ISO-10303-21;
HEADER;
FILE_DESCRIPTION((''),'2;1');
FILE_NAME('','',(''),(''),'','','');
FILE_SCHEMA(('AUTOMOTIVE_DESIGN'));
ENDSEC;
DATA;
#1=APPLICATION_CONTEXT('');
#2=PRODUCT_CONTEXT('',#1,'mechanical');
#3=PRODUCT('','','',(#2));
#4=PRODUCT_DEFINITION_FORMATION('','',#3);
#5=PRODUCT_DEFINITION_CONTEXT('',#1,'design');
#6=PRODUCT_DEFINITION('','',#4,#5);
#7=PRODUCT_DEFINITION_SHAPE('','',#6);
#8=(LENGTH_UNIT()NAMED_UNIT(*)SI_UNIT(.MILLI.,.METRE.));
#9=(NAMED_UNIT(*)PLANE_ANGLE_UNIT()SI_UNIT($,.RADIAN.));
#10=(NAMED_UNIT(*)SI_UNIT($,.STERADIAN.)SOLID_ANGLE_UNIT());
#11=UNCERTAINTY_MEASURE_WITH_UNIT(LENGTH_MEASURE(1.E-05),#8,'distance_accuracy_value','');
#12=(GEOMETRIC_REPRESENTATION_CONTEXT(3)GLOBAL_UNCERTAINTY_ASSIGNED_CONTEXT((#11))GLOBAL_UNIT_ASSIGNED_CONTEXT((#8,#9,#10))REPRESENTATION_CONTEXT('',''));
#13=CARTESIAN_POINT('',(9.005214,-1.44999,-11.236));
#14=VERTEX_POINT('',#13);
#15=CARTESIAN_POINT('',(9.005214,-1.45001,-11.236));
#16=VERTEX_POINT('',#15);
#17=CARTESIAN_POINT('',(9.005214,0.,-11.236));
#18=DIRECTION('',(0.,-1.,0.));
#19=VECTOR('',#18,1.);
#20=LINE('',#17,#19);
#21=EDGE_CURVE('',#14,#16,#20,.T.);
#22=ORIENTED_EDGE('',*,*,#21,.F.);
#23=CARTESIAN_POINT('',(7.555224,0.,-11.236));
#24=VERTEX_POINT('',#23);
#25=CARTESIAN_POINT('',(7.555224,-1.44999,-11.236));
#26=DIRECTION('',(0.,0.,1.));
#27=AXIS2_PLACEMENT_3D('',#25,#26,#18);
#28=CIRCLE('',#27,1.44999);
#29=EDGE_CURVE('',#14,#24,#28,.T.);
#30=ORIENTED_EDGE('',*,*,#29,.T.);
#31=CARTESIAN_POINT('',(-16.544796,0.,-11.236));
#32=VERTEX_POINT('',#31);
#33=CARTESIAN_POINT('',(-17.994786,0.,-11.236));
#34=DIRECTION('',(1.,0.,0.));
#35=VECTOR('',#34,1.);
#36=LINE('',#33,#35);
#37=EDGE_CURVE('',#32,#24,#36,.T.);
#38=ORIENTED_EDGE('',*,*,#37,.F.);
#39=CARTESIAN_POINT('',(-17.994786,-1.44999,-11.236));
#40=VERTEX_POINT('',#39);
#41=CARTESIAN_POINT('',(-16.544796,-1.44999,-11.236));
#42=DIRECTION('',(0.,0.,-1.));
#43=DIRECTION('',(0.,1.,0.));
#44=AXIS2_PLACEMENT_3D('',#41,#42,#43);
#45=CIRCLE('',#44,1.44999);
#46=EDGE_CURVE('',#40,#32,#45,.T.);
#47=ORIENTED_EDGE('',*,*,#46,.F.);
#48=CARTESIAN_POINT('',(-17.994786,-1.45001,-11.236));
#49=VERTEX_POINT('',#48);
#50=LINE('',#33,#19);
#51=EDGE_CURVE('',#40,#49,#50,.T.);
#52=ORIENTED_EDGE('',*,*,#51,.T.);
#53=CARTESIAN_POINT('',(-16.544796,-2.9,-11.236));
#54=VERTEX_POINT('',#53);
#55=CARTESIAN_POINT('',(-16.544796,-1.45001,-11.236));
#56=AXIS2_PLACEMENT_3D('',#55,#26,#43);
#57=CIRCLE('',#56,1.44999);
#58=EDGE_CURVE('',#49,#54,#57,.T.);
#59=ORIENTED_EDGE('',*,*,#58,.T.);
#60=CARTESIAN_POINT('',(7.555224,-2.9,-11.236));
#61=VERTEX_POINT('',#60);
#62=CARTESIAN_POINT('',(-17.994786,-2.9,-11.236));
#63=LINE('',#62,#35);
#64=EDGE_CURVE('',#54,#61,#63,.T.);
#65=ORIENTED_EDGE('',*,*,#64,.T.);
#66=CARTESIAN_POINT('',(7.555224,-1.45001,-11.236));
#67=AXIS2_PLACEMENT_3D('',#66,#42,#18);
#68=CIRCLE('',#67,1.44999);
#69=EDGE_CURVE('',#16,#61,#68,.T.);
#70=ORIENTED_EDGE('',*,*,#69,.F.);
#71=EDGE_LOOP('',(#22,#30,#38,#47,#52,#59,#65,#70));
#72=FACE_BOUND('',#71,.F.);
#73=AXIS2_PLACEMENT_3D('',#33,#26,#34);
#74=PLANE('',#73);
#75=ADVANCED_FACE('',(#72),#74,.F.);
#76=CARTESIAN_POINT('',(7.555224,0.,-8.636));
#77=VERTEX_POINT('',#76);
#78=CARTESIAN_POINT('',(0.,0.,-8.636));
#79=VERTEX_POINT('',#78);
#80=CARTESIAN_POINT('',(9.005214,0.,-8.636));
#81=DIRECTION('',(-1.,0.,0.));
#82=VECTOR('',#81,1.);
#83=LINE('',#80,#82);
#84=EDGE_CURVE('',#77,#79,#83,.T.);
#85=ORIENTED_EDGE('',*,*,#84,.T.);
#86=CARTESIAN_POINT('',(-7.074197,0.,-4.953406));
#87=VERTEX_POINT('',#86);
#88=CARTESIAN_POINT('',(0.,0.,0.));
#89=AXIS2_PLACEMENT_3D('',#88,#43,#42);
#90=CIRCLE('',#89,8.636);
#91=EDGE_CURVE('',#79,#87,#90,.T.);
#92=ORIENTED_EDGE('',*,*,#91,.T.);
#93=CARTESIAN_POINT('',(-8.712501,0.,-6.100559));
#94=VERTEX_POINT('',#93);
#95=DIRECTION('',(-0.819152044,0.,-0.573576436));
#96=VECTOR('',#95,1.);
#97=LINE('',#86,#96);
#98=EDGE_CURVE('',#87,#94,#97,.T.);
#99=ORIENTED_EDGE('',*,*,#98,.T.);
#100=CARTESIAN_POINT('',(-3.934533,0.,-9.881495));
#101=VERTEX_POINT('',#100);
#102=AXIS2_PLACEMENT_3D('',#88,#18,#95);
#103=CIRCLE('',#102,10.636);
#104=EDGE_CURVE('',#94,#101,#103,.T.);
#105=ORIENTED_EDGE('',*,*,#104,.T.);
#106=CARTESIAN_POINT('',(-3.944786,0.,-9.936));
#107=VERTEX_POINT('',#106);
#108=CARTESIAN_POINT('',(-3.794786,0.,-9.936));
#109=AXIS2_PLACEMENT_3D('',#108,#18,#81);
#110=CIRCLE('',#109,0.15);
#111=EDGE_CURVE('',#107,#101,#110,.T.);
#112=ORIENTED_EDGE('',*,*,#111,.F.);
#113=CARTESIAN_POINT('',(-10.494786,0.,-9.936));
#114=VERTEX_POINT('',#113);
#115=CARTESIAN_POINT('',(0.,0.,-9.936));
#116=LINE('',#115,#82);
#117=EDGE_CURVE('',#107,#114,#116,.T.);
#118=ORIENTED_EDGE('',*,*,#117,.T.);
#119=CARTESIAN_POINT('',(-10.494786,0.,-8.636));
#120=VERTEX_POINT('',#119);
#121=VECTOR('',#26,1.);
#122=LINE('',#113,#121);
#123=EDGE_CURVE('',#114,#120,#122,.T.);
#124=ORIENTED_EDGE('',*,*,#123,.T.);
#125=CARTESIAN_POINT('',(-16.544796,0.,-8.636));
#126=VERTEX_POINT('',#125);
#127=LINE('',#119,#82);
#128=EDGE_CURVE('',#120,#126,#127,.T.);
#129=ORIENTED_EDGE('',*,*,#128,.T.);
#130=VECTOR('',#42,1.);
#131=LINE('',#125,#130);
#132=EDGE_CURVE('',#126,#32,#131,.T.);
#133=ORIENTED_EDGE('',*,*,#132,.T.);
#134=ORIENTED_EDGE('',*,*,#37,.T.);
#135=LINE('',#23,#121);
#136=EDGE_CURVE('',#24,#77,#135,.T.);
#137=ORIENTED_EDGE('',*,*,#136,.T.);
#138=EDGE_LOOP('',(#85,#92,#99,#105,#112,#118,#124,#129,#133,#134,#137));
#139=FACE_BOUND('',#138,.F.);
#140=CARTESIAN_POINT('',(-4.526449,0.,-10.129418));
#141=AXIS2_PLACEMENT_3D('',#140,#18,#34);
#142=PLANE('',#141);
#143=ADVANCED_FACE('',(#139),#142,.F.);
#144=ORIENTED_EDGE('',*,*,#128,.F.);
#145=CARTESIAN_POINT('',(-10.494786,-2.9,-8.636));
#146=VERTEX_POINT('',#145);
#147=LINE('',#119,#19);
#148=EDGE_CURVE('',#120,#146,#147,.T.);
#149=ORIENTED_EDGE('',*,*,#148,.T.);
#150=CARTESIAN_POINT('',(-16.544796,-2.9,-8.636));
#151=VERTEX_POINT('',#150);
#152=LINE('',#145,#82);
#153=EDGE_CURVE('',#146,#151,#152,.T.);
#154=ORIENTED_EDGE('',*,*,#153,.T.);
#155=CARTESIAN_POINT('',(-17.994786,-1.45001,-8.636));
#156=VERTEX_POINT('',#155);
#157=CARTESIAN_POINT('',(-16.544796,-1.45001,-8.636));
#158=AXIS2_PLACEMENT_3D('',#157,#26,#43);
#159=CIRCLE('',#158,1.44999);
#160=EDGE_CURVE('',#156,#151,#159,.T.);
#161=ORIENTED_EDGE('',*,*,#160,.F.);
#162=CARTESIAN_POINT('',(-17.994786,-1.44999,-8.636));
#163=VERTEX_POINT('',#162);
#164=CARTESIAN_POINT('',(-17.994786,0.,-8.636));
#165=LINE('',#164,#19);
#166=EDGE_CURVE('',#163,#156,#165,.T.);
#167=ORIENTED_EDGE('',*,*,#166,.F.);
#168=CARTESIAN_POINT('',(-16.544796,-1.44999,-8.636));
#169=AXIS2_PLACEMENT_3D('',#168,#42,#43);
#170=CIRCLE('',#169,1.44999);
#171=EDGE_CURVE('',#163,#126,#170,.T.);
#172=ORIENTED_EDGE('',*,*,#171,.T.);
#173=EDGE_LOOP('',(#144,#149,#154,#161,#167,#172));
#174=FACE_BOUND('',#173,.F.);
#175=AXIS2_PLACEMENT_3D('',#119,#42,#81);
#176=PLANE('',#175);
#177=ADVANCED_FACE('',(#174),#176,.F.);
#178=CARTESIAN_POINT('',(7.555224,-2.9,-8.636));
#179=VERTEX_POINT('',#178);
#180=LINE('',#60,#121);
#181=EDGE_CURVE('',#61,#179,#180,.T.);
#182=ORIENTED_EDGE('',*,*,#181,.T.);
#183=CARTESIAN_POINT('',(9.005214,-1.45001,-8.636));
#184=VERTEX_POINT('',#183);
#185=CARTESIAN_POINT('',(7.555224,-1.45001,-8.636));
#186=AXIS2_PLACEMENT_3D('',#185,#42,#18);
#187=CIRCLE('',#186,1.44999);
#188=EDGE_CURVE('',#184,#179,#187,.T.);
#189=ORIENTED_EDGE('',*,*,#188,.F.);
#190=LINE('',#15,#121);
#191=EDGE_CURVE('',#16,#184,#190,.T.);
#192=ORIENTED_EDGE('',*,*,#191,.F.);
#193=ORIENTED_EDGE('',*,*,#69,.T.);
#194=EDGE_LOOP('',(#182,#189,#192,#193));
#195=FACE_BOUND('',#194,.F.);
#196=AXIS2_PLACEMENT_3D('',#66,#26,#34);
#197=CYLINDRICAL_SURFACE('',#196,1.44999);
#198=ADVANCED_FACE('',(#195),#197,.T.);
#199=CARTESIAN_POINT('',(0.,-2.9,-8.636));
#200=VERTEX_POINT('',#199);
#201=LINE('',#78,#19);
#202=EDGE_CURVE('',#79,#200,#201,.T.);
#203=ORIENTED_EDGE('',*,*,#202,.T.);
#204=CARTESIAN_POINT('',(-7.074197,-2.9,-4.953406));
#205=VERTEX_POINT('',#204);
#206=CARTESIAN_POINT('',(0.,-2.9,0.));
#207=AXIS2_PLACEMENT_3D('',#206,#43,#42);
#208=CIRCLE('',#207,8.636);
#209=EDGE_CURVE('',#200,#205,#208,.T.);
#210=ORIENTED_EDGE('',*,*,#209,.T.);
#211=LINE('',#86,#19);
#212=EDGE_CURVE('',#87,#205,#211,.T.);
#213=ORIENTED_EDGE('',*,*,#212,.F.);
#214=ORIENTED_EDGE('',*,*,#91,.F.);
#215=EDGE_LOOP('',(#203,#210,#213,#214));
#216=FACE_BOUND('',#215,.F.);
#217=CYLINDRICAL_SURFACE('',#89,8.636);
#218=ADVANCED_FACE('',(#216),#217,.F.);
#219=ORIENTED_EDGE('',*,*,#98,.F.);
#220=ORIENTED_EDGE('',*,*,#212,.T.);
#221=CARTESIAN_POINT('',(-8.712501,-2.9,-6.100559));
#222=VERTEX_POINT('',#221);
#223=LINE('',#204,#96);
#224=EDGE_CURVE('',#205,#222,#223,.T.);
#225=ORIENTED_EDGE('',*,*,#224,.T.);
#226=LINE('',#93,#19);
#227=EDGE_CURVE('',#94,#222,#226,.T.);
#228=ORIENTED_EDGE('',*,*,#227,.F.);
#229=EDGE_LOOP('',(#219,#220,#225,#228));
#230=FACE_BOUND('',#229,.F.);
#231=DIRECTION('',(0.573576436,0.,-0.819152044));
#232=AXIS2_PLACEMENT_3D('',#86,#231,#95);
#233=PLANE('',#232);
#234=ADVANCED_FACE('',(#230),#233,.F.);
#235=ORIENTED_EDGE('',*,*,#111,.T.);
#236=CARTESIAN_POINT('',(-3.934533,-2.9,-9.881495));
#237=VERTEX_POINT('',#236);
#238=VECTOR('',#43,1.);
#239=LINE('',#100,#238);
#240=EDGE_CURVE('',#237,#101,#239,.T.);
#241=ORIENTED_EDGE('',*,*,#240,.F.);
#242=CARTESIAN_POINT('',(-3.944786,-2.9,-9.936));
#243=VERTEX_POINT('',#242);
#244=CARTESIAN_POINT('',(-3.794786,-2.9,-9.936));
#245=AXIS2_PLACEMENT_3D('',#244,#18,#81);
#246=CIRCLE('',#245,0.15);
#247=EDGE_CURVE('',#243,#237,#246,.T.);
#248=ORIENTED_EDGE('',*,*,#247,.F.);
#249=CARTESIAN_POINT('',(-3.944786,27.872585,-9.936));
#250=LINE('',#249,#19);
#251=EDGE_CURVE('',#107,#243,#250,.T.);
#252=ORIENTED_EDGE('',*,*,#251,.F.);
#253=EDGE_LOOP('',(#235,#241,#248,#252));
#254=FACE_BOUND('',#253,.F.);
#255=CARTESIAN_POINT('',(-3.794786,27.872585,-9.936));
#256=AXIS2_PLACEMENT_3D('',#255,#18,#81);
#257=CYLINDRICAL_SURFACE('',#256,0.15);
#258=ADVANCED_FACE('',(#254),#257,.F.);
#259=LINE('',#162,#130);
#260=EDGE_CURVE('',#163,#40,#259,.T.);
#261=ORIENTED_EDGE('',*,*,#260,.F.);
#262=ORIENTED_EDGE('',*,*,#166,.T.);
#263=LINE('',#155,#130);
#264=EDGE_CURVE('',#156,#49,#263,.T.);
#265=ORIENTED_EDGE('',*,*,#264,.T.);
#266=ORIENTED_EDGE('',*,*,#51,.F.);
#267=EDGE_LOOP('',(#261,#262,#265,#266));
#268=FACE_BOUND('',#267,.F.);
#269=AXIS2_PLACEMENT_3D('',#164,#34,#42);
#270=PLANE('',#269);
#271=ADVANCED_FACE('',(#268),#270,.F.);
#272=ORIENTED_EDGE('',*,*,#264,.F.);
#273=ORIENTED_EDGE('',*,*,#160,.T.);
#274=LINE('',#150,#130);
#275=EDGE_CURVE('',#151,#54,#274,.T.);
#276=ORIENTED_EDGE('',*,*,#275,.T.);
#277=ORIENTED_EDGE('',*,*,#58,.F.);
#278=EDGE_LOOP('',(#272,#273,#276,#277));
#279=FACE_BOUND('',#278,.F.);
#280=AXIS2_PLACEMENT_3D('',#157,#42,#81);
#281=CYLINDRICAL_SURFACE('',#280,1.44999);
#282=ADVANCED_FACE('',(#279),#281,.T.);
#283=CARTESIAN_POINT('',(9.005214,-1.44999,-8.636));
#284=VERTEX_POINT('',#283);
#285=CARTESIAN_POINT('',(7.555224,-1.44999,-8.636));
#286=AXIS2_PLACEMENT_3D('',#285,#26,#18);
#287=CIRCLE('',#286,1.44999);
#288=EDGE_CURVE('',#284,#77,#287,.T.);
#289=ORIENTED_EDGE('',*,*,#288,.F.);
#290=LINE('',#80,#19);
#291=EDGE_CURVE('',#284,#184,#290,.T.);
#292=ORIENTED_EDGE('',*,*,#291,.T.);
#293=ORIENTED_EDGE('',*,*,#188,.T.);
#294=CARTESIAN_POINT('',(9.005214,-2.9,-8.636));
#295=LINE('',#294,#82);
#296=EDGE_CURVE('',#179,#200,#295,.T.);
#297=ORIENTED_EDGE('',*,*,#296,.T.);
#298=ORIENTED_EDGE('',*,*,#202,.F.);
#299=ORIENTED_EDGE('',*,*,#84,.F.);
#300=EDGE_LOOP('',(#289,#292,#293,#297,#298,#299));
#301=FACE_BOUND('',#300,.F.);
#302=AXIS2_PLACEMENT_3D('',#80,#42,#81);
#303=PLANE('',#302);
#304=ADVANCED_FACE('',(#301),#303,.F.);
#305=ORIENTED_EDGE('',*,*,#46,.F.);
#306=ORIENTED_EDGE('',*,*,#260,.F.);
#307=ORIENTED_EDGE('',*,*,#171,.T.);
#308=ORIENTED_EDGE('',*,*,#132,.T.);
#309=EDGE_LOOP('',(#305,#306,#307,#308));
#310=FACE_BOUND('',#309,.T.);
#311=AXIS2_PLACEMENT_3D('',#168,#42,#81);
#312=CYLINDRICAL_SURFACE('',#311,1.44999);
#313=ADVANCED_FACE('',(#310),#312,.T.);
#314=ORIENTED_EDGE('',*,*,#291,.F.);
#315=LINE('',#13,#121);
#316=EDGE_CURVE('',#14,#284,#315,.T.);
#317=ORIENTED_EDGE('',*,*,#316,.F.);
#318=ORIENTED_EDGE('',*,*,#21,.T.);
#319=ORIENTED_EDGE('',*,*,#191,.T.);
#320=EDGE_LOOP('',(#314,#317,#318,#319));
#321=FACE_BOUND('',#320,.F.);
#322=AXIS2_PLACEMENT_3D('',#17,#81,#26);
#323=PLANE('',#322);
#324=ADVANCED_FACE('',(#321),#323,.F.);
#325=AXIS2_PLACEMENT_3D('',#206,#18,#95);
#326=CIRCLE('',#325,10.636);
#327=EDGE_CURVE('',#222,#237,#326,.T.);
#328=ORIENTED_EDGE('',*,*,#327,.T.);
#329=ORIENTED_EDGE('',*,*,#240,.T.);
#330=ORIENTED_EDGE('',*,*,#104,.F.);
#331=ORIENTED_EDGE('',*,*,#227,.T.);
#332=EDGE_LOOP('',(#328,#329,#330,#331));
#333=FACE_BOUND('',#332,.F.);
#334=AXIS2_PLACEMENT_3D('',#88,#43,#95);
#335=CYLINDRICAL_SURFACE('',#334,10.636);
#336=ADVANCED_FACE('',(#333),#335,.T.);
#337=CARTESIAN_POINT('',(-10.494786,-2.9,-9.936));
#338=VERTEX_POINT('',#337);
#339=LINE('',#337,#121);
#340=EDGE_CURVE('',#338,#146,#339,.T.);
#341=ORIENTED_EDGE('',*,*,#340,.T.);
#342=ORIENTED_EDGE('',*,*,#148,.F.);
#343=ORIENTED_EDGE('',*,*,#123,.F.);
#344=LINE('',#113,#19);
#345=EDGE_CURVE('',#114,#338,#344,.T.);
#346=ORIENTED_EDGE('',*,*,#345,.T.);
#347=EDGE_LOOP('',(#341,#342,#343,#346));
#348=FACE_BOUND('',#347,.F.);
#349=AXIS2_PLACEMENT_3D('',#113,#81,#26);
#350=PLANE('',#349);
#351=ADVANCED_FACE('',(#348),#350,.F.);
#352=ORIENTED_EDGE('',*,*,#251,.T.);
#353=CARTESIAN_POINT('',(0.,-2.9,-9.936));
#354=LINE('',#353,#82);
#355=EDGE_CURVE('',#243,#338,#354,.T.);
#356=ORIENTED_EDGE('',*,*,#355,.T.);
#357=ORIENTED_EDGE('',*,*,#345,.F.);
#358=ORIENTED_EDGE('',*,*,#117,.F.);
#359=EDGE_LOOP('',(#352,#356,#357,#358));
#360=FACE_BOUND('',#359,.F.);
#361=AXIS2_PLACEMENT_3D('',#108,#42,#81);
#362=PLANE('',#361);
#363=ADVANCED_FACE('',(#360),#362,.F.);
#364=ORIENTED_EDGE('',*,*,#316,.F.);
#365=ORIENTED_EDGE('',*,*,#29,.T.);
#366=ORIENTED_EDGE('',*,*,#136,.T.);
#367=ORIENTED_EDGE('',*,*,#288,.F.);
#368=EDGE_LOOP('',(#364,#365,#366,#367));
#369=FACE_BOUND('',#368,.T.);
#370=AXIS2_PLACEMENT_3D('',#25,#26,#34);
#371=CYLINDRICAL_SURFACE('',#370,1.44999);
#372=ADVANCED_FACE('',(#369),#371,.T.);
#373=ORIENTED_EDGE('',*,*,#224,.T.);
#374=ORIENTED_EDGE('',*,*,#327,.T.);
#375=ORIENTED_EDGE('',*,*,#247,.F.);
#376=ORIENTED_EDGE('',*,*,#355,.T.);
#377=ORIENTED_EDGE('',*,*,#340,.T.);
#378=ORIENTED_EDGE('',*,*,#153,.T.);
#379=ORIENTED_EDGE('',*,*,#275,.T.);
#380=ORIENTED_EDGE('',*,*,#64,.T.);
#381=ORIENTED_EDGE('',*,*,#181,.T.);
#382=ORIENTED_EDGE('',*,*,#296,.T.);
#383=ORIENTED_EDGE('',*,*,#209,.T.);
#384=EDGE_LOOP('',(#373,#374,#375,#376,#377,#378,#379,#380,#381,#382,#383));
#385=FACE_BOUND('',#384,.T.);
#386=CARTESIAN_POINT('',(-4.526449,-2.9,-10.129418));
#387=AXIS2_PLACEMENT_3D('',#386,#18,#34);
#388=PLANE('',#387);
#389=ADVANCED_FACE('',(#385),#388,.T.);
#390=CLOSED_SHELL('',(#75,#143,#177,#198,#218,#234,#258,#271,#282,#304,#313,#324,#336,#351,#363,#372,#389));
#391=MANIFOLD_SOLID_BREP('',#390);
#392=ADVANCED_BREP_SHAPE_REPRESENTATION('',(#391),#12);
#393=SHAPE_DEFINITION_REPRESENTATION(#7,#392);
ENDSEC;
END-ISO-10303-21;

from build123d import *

# Parameters (mm, degrees)
F2_DEPTH = 2.9
F3_R     = 1.44999
F4_D     = 0.3


# Not quite as in the source:
# - a fillet or chamfer is up to 0.001 mm smaller than in the source, because OpenCascade refuses the exact size


with BuildPart() as f2:
    # F0 (on Front) → F2 (new body)
    with BuildSketch(Plane.XZ):
        Polygon((9.0052141035, -8.636), (0, -8.636), (0, -9.936), (-3.7947858965, -9.936), (-10.4947858965, -9.936), (-10.4947858965, -8.636), (-17.9947858965, -8.636), (-17.9947858965, -11.236), (9.0052141035, -11.236), align=None)
        with BuildLine():
            Line((0, -9.936), (0, -8.636))
            ThreePointArc((0, -8.636), (-3.9876610239, -7.6602255553), (-7.0741970545, -4.9534061043))
            Line((-7.0741970545, -4.9534061043), (-8.7125011431, -6.100558977))
            ThreePointArc((-8.7125011431, -6.100558977), (-6.5410785986, -8.3868222091), (-3.7947858965, -9.936))
            Line((-3.7947858965, -9.936), (0, -9.936))
        make_face()
    extrude(amount=F2_DEPTH)

    # F3 (radius 1.45 in the source; OpenCascade refuses exactly that, so slightly less here)
    f3_edges = [f2.edges().sort_by_distance(p)[0] for p in [
        (9.005214, -2.9, -9.936),
        (9.005214, 0, -9.936),
        (-17.994786, -2.9, -9.936),
        (-17.994786, 0, -9.936),
    ]]
    fillet(f3_edges, radius=F3_R)

    # F4 (through all)
    with Locations(Plane(origin=(0, 0, 0), x_dir=(1, 0, 0), z_dir=(0, 1, 0))):
        with Locations((-3.7947858965, 9.936)):
            Hole(F4_D / 2)


solid = f2.part
